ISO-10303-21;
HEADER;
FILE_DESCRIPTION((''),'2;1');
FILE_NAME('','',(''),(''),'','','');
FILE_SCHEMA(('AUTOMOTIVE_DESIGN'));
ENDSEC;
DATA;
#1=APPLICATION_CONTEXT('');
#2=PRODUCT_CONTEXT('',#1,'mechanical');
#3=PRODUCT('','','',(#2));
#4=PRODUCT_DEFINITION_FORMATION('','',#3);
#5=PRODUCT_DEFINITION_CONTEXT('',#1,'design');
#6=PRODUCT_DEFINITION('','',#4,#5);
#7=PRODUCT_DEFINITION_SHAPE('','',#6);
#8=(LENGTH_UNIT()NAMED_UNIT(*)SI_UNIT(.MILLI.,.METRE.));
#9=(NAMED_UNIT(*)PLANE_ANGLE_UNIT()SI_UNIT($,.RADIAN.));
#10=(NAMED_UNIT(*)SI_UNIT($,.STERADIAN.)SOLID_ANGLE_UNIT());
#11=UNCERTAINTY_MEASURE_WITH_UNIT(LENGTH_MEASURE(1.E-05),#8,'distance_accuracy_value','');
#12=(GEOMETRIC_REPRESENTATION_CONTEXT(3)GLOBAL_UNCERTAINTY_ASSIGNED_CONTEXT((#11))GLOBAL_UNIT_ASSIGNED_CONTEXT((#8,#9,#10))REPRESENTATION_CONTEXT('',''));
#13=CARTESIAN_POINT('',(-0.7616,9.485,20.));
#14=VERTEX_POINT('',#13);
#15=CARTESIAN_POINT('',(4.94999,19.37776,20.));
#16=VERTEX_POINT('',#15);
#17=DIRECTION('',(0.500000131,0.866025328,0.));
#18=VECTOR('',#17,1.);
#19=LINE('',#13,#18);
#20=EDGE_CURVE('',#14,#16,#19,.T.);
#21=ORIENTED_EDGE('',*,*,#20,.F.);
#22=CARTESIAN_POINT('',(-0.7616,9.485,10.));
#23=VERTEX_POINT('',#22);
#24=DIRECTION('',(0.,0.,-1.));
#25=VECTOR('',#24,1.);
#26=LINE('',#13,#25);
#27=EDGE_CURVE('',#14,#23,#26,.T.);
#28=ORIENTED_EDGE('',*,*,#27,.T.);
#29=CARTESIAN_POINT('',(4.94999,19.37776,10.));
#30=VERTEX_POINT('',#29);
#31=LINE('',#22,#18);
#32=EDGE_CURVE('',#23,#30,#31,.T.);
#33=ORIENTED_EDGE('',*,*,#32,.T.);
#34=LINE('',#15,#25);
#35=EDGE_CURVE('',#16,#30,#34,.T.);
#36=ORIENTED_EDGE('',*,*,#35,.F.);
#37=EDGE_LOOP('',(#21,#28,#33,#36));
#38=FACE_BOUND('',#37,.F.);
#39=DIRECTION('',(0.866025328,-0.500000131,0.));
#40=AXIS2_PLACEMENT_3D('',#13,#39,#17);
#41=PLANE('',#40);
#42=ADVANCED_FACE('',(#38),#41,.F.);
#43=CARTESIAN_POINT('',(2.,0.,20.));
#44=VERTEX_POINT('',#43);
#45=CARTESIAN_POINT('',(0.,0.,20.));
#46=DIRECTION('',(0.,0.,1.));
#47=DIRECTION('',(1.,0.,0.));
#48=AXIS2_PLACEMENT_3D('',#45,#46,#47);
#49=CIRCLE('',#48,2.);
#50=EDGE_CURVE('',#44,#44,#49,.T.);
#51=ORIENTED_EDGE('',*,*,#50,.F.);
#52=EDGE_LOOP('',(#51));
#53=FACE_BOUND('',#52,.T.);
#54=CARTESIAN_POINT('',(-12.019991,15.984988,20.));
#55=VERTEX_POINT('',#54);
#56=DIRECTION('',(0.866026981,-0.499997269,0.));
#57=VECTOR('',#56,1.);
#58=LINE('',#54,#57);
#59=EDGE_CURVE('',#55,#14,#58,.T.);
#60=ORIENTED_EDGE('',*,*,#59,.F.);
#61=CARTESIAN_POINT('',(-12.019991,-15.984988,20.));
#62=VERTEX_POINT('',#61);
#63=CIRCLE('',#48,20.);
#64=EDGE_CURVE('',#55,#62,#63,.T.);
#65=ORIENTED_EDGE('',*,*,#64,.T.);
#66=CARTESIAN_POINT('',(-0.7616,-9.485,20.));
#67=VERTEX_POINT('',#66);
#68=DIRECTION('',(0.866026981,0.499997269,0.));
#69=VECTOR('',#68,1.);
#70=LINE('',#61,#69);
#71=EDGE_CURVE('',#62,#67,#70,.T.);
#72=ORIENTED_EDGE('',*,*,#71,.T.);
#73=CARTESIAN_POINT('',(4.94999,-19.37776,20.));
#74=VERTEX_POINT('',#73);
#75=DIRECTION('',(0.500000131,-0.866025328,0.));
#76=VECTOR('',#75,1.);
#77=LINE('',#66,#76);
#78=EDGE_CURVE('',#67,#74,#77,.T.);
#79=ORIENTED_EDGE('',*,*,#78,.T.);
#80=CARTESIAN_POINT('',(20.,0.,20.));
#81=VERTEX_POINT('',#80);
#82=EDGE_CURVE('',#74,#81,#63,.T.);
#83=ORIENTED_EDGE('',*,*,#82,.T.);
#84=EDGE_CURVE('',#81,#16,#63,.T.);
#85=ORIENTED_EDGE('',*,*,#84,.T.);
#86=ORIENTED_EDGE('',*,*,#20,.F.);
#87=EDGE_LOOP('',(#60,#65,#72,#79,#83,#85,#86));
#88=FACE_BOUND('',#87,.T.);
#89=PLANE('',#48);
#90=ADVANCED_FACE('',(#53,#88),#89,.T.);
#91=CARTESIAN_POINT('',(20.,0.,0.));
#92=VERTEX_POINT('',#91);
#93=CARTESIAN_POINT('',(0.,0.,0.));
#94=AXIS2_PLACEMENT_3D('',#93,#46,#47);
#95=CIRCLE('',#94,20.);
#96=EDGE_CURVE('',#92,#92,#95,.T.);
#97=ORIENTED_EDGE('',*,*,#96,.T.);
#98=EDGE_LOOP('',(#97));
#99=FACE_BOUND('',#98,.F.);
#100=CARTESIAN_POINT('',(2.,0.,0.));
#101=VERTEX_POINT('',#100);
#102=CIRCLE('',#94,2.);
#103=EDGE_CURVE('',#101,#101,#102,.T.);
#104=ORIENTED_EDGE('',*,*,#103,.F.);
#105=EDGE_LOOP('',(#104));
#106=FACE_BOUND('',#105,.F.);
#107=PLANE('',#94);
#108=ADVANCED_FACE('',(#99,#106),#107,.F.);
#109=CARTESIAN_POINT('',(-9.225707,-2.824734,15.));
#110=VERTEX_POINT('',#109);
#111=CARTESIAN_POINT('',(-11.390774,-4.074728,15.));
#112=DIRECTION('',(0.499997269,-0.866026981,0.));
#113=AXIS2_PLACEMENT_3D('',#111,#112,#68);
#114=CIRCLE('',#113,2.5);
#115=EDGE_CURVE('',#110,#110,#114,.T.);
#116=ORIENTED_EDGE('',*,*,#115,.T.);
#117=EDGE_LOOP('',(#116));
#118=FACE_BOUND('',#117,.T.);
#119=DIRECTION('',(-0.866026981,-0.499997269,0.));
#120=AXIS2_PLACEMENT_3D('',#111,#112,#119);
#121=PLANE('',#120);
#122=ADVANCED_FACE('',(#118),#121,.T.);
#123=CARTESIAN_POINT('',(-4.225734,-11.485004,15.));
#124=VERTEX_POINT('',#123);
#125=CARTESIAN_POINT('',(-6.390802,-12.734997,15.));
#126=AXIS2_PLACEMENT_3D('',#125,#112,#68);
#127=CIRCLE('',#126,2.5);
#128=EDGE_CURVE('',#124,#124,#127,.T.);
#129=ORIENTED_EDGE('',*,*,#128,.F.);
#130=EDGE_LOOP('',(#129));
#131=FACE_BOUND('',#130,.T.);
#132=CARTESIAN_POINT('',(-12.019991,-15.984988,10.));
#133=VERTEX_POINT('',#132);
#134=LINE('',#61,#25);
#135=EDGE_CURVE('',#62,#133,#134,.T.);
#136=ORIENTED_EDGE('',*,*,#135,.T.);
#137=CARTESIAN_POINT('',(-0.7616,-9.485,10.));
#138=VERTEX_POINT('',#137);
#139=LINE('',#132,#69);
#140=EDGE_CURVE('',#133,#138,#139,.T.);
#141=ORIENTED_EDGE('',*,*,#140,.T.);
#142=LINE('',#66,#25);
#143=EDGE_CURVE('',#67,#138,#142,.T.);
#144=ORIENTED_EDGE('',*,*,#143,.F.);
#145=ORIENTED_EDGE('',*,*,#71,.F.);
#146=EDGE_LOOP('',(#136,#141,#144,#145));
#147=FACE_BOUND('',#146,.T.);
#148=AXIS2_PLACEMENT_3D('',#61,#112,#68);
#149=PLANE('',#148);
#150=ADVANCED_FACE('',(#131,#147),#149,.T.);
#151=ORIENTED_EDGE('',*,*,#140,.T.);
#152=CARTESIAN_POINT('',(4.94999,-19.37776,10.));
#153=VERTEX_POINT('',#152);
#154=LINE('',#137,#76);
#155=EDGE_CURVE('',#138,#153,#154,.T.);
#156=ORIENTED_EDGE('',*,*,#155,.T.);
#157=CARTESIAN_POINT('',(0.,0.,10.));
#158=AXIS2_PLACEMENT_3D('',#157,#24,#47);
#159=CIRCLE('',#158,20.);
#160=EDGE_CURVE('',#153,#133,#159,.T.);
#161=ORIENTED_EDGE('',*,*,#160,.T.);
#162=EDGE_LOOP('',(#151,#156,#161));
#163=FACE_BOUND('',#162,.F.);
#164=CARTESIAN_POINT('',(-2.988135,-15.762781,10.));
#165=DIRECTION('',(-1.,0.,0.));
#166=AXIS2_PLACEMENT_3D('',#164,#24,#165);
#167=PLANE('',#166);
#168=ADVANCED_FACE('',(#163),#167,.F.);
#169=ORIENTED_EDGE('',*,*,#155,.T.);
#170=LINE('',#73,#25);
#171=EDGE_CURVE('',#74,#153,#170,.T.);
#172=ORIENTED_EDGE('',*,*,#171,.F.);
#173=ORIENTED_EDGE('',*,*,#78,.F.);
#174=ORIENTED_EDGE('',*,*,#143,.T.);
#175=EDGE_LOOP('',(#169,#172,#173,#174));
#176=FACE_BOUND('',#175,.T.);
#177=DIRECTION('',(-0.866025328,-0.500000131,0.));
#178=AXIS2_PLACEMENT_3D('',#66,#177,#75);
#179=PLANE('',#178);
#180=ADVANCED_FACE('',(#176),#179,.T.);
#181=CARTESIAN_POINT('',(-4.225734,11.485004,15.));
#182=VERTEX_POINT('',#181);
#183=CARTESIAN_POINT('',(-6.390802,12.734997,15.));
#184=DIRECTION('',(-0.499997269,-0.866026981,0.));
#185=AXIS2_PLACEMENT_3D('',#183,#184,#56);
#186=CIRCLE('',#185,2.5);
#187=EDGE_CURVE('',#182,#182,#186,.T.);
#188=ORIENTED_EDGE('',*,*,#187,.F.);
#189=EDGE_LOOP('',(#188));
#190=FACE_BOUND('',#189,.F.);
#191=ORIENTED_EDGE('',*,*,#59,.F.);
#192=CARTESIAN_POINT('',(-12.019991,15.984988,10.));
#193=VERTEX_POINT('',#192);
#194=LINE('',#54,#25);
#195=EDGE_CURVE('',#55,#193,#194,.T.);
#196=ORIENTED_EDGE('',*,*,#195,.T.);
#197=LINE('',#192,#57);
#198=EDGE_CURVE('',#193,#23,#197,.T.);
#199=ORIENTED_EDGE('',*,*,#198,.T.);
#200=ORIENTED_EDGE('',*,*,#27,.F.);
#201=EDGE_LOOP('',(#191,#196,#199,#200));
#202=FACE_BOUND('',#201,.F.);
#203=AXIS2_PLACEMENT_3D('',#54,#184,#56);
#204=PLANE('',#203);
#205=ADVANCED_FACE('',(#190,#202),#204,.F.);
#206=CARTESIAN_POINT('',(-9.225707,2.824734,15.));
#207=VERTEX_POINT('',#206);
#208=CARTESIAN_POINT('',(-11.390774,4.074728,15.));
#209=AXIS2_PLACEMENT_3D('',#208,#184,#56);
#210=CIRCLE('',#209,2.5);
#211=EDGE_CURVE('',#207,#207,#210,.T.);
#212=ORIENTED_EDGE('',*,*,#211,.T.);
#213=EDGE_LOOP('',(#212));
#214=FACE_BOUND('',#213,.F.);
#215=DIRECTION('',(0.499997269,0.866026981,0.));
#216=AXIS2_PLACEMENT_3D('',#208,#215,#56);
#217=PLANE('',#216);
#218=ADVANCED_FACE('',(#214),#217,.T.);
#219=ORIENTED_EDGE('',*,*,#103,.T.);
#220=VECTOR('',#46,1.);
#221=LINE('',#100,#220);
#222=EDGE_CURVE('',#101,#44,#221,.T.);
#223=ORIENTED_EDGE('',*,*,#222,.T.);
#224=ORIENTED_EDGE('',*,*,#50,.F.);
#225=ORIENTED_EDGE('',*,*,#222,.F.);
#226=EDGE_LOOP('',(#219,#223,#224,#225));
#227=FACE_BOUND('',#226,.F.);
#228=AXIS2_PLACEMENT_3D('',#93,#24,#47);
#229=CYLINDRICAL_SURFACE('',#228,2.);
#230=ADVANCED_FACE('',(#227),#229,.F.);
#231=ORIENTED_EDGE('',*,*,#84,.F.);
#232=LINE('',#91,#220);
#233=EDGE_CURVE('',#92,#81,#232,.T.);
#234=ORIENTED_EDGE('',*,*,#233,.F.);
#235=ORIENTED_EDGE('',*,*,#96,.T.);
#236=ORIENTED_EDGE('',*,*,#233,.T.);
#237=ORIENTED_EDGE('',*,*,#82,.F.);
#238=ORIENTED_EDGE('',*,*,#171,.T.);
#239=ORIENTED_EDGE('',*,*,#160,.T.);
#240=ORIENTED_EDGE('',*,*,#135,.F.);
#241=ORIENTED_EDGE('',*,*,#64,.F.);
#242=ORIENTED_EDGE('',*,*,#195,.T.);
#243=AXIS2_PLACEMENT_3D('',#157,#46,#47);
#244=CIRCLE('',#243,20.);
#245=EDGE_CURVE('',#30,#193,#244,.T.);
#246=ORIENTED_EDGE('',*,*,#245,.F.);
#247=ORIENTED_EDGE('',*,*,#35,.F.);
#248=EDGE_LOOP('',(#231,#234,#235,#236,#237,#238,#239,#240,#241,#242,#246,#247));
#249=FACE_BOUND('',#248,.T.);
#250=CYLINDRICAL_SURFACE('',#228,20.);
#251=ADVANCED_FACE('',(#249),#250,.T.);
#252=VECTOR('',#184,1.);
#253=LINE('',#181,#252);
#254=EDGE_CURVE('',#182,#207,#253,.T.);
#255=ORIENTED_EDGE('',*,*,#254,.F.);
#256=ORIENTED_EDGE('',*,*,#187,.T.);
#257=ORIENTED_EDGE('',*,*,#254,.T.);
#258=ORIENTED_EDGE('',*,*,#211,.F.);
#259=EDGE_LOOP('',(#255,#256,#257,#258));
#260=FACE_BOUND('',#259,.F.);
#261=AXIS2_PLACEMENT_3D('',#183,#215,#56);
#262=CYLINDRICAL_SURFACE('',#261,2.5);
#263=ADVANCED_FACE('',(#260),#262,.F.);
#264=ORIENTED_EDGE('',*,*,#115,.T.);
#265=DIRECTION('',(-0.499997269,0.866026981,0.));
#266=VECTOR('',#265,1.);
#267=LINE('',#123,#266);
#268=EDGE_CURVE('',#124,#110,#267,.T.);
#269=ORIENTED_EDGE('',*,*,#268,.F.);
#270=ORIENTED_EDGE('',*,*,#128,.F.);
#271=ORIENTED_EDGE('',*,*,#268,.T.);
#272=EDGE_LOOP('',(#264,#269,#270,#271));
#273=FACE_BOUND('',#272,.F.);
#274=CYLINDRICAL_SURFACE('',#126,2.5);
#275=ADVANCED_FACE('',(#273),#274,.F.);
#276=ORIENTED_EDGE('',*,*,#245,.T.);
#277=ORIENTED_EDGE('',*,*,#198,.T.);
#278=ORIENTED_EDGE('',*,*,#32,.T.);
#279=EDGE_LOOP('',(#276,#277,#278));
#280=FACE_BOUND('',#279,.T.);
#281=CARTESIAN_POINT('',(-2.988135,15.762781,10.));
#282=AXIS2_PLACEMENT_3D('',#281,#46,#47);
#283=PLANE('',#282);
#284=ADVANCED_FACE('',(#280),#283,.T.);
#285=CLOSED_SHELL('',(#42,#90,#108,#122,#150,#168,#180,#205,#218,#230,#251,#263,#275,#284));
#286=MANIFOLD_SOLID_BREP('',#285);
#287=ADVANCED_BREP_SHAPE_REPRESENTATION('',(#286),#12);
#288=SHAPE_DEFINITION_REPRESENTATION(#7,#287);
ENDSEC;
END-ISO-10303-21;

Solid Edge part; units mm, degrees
sketch "Sketch1" plane through (0, 0, 0) normal (0, 0, 1) x (1, 0, 0)
  circle A0 centre (0, 0) radius 20
  circle A1 centre (0, 0) radius 2
  dimension "D1" = 40
  dimension "D2" = 4
extrude "ExtrudedProtrusion_1" add sketch "Sketch1" along normal blind 20
sketch "Sketch2" plane through (0, 0, 20) normal (0, 0, 1) x (1, 0, 0)
  line L0 (-0.7616, -9.485) -> (4.95, -19.3778)
  line L1 (-12.02, -15.985) -> (-0.7616, -9.485)
  arc A0 (4.95, -19.3778) -> (-12.02, -15.985) centre (0, 0) cw
  line L2 (-0.7616, 9.485) -> (4.95, 19.3778)
  line L3 (-12.02, 15.985) -> (-0.7616, 9.485)
  arc A1 (4.95, 19.3778) -> (-12.02, 15.985) centre (0, 0) ccw
extrude "ExtrudedCutout_1" cut sketch "Sketch2" against normal blind 10
sketch "Sketch3" plane through (-6.3908, -12.735, 15) normal (0.5, -0.8660254, 0) x (0.8660254, 0.5, 0)
  circle A0 centre (0, 0) radius 2.5
extrude "ExtrudedCutout_2" cut sketch "Sketch3" against normal blind 10
mirror "Mirror1" about plane through (0, 0, 0) normal (0, -1, 0) of "ExtrudedCutout_2"
properties material "Aluminio"
